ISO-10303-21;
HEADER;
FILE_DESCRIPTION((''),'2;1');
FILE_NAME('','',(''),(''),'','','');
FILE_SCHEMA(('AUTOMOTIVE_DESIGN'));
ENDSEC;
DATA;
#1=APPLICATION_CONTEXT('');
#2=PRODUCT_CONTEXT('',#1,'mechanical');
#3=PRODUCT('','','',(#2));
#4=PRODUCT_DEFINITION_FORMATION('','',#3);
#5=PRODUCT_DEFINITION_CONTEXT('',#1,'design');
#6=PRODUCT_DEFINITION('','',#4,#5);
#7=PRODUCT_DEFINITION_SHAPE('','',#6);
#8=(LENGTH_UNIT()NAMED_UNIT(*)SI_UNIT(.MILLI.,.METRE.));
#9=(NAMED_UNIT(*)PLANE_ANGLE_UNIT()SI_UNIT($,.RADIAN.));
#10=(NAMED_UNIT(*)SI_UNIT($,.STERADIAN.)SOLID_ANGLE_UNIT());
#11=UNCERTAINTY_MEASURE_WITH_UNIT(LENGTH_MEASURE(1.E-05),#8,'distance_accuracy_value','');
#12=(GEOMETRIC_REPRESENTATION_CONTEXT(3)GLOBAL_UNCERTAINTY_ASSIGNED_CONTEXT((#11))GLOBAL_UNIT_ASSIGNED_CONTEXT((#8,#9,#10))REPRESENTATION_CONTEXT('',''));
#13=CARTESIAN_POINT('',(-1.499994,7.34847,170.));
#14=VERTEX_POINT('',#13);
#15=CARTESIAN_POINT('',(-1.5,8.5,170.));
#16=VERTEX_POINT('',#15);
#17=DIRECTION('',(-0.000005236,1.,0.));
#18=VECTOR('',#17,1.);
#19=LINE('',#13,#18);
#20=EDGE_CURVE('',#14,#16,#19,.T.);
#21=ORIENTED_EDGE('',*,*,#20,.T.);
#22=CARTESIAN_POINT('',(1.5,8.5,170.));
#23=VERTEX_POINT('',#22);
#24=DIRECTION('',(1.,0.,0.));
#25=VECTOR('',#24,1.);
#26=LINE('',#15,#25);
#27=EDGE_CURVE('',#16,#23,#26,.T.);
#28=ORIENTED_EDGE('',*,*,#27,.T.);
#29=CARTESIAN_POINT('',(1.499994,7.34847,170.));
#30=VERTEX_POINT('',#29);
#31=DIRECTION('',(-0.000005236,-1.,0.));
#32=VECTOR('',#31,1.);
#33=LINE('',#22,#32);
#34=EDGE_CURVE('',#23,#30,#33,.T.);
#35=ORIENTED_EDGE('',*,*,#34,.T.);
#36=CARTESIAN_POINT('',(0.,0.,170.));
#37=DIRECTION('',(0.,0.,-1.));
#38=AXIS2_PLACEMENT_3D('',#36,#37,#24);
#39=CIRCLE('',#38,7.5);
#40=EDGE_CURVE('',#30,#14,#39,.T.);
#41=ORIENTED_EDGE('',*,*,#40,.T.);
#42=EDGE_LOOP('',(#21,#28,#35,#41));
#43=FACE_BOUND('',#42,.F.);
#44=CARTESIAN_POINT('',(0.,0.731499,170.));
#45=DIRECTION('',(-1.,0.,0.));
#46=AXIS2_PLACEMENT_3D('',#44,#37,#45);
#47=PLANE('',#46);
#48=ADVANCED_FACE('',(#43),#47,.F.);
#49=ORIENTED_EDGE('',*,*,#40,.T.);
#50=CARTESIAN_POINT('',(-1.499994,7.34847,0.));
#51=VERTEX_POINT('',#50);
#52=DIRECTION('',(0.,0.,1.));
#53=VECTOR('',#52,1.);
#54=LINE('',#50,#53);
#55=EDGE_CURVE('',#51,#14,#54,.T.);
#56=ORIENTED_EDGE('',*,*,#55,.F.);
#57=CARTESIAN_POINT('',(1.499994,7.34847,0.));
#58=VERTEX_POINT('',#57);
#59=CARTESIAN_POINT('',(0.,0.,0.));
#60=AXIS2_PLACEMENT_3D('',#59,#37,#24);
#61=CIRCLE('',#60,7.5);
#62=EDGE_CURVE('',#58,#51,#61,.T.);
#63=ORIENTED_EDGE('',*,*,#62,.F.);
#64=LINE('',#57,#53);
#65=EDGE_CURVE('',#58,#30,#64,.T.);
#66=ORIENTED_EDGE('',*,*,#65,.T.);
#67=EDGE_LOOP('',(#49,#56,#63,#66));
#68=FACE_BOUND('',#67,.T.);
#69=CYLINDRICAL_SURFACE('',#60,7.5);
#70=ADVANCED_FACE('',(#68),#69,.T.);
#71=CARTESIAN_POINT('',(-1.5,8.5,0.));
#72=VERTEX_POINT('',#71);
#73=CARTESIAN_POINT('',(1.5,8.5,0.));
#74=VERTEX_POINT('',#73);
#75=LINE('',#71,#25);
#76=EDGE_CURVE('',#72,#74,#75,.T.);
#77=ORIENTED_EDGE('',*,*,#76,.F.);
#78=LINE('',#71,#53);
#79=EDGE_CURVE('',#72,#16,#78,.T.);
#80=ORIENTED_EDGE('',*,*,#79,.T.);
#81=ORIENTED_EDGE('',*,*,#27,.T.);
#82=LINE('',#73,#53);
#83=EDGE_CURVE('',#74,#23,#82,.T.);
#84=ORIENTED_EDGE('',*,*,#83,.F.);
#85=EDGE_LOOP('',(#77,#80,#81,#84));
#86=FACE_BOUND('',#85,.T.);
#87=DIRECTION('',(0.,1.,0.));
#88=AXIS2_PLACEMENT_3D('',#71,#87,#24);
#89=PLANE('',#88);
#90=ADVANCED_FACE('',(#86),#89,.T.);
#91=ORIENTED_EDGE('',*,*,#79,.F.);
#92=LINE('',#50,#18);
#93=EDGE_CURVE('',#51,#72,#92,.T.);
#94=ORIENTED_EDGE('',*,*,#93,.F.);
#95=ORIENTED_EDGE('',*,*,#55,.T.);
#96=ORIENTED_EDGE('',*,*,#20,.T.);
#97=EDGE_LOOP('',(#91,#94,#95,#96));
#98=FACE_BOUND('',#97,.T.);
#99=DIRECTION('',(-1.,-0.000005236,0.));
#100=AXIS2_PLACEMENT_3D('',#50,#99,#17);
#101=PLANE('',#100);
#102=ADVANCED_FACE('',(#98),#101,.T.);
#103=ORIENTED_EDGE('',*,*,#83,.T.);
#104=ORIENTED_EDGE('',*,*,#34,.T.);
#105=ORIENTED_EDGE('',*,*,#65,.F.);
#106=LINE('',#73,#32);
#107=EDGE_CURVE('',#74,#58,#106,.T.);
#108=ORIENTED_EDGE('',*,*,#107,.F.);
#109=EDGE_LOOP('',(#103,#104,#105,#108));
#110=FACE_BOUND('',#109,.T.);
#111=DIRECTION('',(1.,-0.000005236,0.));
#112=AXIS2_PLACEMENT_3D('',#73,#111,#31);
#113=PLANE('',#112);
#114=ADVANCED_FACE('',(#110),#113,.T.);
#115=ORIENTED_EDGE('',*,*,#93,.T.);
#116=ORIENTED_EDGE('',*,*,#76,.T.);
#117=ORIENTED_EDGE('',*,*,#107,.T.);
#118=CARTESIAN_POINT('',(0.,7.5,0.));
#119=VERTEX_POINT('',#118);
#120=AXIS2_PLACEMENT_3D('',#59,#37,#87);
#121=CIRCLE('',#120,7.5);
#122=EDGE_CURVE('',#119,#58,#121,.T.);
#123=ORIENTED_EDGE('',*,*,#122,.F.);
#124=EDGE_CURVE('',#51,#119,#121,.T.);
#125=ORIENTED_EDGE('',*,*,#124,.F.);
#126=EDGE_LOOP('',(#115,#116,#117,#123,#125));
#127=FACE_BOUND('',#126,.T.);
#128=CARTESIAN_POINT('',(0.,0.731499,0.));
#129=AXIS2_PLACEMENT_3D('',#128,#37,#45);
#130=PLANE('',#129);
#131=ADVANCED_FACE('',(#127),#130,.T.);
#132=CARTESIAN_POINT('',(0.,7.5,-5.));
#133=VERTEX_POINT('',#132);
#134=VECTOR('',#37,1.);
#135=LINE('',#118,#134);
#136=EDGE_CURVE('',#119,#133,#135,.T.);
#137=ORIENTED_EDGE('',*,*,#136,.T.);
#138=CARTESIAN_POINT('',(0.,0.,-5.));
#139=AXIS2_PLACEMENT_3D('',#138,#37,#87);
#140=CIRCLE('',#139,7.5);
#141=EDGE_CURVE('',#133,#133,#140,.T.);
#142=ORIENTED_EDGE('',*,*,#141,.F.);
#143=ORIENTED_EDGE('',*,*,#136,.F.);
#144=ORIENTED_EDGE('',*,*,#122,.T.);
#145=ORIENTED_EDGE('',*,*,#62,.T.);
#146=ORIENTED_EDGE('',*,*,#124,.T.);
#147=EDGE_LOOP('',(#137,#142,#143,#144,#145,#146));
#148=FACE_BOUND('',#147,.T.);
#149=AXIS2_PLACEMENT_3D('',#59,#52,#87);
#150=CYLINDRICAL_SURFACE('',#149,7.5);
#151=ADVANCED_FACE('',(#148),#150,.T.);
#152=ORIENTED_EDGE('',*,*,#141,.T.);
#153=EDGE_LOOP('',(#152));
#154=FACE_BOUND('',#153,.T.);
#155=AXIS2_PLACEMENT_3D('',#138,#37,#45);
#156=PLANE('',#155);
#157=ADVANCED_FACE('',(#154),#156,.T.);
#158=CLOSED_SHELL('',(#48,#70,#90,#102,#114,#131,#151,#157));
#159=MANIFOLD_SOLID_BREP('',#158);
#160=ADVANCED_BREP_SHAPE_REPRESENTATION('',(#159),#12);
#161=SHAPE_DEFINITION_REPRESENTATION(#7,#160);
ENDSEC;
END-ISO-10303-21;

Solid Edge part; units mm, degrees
sketch "Sketch1" plane through (0, 0, 0) normal (0, 0, 1) x (1, 0, 0)
  line L0 (-1.5, 8.5) -> (1.5, 8.5)
  line L1 (-1.5, 7.3485) -> (-1.5, 8.5)
  line L2 (-1.5, 7.3485) -> (-1.5, 8.5) construction
  line L3 (1.5, 8.5) -> (1.5, 7.3485)
  arc A0 (1.5, 7.3485) -> (-1.5, 7.3485) centre (0, 0) cw
  dimension "D1" = 15
  dimension "D2" = 3
  dimension "D3" = 2
  dimension "D4" = 6.5
extrude "Protrusion1" add sketch "Sketch1" along normal blind 170
sketch "Sketch2" plane through (0, 0.5, 0) normal (0, 0, -1) x (0, 1, 0)
  circle A0 centre (-0.5, 0) radius 7.5
extrude "ExtrudedProtrusion_2" add sketch "Sketch2" along normal blind 5
